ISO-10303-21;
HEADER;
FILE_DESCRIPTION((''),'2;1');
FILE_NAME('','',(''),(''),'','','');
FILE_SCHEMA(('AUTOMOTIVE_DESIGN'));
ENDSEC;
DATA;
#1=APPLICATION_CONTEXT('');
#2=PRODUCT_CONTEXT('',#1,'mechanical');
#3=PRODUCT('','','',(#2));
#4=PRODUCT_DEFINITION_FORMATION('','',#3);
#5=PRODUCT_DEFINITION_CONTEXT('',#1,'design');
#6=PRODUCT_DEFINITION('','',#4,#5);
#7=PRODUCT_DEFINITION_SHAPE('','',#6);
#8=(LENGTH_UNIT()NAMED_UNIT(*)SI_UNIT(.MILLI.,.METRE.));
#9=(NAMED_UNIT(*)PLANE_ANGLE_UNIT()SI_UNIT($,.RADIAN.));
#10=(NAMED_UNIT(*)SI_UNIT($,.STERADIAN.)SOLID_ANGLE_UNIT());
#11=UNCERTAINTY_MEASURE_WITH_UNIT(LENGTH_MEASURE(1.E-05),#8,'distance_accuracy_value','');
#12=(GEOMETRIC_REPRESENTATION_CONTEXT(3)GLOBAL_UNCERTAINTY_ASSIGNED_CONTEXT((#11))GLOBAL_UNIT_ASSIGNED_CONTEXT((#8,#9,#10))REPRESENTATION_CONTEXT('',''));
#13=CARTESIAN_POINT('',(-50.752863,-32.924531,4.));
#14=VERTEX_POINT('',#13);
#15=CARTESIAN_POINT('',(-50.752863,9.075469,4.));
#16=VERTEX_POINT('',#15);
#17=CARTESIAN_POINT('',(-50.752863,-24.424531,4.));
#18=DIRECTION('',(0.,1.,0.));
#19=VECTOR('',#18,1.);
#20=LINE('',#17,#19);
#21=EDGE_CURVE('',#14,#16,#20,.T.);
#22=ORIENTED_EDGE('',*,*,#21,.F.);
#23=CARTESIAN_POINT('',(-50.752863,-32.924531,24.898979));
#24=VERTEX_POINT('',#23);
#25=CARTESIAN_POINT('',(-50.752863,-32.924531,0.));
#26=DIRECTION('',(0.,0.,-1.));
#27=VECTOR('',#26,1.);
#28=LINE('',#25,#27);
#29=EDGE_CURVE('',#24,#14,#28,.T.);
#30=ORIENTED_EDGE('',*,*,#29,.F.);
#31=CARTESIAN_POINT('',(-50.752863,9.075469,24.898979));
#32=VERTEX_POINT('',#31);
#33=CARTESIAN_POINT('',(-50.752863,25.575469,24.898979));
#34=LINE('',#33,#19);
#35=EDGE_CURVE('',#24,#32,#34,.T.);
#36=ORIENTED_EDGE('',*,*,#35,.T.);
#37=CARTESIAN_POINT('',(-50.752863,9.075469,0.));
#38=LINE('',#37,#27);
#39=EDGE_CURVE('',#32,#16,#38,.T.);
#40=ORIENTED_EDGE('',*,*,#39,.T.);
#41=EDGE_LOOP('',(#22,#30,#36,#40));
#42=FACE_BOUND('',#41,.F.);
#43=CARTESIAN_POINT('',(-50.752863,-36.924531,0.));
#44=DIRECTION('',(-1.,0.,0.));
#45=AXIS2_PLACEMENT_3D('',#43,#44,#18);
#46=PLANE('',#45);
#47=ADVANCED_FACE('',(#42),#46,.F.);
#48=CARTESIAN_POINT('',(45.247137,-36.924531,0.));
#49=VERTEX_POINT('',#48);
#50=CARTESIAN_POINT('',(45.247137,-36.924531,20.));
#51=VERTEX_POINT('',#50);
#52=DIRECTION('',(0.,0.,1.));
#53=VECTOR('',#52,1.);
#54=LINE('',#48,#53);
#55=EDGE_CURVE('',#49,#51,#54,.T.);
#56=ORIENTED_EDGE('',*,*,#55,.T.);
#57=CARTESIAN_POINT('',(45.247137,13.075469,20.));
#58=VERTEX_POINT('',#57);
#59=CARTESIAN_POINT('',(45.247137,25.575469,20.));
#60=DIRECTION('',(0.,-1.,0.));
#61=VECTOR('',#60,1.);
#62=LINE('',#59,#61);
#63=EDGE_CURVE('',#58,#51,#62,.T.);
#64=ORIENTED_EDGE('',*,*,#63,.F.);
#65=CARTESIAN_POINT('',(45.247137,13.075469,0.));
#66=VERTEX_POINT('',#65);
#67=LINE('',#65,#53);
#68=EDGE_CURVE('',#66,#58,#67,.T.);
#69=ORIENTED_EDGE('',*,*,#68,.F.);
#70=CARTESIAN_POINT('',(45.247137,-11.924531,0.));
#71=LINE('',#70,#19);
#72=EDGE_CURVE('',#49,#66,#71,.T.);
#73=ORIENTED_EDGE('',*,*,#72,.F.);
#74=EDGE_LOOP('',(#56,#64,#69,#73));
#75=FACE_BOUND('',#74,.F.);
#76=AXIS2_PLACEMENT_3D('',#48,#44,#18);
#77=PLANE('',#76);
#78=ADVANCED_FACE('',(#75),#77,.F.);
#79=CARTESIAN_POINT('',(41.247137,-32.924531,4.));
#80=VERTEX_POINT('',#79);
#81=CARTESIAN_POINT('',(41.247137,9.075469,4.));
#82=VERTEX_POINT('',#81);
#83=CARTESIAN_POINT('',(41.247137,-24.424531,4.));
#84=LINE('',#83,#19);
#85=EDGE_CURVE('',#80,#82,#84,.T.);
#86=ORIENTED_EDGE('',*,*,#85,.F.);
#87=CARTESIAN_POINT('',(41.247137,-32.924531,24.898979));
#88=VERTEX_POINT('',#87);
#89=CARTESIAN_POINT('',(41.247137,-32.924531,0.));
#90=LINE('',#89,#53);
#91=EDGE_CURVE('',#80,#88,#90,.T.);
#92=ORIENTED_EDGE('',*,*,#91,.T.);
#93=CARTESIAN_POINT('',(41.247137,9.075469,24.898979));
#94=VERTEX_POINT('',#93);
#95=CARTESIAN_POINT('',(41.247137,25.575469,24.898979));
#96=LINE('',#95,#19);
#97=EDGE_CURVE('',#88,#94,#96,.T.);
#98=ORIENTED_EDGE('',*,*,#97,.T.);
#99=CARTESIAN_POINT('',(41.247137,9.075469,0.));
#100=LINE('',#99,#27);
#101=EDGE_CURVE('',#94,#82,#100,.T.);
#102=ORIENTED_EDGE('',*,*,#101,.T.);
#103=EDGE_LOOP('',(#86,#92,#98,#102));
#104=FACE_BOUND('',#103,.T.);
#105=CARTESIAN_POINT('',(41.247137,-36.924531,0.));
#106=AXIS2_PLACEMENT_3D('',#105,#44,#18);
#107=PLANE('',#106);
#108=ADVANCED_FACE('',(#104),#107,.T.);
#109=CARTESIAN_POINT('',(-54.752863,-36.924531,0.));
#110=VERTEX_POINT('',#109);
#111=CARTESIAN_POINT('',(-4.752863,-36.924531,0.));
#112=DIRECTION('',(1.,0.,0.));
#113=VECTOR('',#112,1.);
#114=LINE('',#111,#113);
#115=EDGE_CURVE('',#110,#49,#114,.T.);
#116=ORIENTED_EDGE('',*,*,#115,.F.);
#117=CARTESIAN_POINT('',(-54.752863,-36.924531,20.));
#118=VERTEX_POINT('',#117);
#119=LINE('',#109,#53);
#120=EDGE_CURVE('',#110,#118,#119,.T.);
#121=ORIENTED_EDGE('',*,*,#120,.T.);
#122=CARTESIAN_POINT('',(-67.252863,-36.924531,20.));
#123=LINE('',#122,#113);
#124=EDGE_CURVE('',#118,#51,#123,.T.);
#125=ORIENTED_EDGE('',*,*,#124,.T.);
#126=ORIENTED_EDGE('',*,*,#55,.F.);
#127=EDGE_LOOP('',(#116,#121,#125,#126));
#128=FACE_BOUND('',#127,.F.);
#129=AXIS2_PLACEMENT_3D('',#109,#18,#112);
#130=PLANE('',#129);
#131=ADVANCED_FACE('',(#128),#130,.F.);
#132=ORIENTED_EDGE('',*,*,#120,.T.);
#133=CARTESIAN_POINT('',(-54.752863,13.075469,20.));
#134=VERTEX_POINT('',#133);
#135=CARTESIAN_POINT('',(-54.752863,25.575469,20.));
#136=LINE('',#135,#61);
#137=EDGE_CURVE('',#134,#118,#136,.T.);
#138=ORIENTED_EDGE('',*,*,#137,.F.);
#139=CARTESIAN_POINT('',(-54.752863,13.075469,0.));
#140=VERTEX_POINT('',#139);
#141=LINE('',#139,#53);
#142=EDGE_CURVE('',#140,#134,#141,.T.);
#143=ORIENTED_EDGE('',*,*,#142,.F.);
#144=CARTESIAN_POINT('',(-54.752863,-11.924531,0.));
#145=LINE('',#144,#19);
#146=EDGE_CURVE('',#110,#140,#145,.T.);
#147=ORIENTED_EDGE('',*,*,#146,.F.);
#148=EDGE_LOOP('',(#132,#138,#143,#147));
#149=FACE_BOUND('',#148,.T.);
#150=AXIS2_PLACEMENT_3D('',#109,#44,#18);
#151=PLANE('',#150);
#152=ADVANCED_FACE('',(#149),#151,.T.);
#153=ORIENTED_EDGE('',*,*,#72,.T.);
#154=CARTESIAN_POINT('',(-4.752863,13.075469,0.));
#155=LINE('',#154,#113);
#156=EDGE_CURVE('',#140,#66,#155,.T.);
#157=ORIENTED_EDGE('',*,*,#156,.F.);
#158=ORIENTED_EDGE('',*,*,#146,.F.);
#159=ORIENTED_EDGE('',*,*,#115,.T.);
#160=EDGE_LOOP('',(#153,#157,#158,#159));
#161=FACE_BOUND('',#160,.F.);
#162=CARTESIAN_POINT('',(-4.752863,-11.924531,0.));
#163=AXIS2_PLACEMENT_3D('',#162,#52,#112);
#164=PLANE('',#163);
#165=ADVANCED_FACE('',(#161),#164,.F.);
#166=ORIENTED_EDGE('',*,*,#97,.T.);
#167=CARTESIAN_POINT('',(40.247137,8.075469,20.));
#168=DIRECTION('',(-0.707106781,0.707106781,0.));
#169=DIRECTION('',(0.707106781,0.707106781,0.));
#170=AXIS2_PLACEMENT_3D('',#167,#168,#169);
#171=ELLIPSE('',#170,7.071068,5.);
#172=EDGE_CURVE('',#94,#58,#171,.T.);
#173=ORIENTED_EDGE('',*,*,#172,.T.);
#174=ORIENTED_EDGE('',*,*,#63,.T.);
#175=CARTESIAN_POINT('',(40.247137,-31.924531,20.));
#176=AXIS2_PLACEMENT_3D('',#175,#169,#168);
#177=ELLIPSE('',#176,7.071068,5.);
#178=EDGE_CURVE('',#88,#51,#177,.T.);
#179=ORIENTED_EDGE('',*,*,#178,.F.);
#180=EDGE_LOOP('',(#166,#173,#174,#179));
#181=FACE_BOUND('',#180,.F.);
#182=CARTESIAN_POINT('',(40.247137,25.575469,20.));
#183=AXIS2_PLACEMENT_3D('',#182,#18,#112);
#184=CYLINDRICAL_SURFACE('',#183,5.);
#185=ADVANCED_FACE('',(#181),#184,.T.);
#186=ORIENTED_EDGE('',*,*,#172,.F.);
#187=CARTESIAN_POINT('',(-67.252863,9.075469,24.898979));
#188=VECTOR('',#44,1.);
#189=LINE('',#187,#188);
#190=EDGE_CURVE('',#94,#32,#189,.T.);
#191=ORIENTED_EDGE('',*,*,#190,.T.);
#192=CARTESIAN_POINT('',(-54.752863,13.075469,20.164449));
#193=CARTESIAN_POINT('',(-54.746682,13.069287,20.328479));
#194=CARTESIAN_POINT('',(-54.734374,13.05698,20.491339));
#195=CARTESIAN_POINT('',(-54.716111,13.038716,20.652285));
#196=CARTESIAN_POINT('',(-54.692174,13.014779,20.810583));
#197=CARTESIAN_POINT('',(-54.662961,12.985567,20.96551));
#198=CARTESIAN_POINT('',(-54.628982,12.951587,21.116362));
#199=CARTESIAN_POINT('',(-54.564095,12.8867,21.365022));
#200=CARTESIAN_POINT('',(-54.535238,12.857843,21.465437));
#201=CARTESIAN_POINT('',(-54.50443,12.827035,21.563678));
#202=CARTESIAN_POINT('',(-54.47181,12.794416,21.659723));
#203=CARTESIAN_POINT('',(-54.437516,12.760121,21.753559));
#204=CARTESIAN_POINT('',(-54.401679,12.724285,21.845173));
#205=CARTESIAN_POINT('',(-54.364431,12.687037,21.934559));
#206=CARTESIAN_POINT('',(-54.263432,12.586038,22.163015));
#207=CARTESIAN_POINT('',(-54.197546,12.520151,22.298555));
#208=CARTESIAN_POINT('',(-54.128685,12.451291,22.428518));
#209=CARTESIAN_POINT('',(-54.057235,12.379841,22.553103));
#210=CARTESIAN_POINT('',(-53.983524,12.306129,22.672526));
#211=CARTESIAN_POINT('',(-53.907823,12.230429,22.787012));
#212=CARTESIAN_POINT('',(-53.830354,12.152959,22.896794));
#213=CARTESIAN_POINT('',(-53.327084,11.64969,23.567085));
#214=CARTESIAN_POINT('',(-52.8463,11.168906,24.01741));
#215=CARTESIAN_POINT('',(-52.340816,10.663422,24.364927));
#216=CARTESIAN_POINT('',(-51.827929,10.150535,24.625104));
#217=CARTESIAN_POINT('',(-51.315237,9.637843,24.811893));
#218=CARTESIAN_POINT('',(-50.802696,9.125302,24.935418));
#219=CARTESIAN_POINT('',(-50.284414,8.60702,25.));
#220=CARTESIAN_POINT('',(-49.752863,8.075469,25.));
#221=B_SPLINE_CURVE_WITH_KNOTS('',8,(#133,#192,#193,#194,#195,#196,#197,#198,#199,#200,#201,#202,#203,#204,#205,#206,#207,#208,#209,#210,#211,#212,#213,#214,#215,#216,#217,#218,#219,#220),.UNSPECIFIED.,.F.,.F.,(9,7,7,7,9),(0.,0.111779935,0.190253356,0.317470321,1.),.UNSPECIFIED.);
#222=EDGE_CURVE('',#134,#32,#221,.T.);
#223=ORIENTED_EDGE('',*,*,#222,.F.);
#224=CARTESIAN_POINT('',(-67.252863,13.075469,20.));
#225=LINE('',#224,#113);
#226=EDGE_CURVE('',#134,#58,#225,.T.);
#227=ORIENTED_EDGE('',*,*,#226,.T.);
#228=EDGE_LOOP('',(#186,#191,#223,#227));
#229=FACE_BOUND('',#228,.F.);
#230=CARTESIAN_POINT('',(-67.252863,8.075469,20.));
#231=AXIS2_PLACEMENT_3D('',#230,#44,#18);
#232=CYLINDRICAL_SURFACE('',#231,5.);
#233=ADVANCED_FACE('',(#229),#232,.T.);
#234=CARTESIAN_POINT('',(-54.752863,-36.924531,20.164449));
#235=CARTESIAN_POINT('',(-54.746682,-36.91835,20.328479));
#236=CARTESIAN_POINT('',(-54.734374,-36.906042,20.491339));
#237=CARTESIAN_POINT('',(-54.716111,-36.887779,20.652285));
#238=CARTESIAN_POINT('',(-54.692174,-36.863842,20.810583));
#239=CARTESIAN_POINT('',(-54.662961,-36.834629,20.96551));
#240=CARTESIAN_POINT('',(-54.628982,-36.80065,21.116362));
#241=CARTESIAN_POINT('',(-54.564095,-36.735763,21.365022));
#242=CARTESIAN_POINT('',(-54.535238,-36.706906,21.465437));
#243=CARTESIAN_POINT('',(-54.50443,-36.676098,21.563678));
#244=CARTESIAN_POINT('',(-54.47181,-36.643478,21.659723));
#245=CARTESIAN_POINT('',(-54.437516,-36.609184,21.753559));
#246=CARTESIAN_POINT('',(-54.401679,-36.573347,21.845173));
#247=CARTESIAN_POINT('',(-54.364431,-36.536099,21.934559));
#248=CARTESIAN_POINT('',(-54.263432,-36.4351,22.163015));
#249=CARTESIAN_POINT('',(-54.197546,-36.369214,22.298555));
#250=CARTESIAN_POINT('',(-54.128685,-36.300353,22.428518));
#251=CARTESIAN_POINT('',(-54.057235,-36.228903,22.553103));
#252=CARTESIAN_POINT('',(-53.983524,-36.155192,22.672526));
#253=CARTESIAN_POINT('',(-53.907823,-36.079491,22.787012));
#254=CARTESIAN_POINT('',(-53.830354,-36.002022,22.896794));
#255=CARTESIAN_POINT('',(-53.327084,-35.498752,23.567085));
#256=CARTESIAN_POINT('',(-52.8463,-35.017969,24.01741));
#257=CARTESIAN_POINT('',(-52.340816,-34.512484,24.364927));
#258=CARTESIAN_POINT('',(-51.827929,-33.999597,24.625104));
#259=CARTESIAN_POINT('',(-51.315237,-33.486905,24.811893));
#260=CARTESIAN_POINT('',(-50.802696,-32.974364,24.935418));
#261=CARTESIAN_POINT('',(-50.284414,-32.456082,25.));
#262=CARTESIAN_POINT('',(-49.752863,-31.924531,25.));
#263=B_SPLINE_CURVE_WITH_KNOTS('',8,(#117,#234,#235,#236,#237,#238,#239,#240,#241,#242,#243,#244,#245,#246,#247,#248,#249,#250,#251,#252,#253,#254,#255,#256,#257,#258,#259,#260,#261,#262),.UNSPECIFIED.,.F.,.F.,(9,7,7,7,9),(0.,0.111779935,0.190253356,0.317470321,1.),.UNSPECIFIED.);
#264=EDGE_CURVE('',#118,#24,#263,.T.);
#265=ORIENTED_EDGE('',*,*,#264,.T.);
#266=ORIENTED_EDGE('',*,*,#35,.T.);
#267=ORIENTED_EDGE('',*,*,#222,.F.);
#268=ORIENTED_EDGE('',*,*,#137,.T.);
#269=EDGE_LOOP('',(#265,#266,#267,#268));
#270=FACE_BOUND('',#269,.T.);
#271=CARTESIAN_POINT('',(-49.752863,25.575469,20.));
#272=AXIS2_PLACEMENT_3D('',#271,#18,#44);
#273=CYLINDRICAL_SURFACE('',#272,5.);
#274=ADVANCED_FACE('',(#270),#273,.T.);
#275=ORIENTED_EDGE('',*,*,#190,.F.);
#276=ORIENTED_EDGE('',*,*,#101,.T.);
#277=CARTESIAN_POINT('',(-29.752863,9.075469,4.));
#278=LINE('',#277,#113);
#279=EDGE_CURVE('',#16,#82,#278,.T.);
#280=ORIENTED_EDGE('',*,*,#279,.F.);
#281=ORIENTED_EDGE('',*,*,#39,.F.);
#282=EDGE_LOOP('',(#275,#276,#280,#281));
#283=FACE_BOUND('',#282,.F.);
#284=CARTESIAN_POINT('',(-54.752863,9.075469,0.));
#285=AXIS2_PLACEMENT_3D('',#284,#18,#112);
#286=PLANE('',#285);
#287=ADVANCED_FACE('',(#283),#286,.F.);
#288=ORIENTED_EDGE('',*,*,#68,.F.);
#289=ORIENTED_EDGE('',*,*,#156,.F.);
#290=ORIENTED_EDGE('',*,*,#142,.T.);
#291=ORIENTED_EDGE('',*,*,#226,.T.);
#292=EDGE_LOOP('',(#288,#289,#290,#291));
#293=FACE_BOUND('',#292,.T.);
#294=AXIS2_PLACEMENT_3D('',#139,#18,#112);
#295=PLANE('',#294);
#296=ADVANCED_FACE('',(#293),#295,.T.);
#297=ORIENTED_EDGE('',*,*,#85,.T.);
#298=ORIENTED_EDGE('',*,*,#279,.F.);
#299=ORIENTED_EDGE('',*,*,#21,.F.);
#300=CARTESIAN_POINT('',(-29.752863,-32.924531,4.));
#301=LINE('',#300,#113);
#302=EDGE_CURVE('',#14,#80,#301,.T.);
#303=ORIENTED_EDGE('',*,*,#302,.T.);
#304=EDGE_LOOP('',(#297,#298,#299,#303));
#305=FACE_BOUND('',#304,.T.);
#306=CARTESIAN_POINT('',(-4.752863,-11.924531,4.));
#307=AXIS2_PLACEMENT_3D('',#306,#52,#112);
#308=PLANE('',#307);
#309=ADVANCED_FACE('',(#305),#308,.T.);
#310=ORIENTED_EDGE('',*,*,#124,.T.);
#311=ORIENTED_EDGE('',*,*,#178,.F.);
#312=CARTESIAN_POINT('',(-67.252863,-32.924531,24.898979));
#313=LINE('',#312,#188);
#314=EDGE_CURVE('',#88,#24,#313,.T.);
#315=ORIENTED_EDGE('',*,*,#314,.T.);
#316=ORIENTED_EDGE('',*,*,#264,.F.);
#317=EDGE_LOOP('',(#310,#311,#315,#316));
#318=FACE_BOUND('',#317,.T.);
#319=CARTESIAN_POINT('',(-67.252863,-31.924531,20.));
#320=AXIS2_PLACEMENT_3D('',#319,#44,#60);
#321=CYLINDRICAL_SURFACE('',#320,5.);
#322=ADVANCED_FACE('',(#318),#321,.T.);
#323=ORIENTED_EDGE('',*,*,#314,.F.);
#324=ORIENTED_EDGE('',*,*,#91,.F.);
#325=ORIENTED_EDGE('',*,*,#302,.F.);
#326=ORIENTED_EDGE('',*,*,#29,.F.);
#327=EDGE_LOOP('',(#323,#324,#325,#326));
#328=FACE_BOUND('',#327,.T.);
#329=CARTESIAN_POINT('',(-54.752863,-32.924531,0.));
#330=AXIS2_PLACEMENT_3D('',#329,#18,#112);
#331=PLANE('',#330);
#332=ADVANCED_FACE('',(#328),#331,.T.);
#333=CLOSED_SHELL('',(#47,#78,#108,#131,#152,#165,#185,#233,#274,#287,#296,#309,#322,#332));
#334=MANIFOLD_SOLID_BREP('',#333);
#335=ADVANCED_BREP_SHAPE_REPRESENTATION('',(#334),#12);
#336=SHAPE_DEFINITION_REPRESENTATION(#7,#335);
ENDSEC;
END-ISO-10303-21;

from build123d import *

# Parameters (mm, degrees)
F0_W        = 100
F0_H        = 50
F1_DEPTH    = 25
F2_T        = -4
F3_T1_DEPTH = 75
F3_T3_DEPTH = 125


# Not quite as in the source:
# - a fillet or chamfer that OpenCascade refuses, or shapes differently, is made with other operations: its cross-section is extruded or revolved along the edge and cut away or added


with BuildPart() as f1:
    # F0 (on Top) → F1 (new body)
    with BuildSketch(Plane.XY):
        with Locations((-4.7528631985, -11.9245312498)):
            Rectangle(F0_W, F0_H)
    extrude(amount=F1_DEPTH)

    # F2
    f2_openings = [f1.faces().sort_by_distance(p)[0] for p in [
        (-4.752863, -11.924531, 25),
    ]]
    offset(amount=F2_T, openings=f2_openings)

    # F3: fillet of radius 5 on 4 edges, made by hand

    # F3_s2 → F3_t1 (cut)
    with BuildSketch(Plane.XZ.offset(-25.5754687502)):
        with BuildLine():
            ThreePointArc((-54.7528631985, 20), (-53.2883971045, 23.5355339059), (-49.7528631985, 25))
            Line((-49.7528631985, 25), (-54.7528631985, 25))
            Line((-54.7528631985, 25), (-54.7528631985, 20))
        make_face()
        with BuildLine():
            ThreePointArc((45.2471368015, 20), (43.7826707074, 23.5355339059), (40.2471368015, 25))
            Line((40.2471368015, 25), (45.2471368015, 25))
            Line((45.2471368015, 25), (45.2471368015, 20))
        make_face()
    extrude(amount=F3_T1_DEPTH, mode=Mode.SUBTRACT)

    # F3_s4 → F3_t3 (cut)
    with BuildSketch(Plane.YZ.offset(-67.2528631985)):
        with BuildLine():
            ThreePointArc((13.0754687502, 20), (11.6110026561, 23.5355339059), (8.0754687502, 25))
            Line((8.0754687502, 25), (13.0754687502, 25))
            Line((13.0754687502, 25), (13.0754687502, 20))
        make_face()
        with BuildLine():
            ThreePointArc((-36.9245312498, 20), (-35.4600651557, 23.5355339059), (-31.9245312498, 25))
            Line((-31.9245312498, 25), (-36.9245312498, 25))
            Line((-36.9245312498, 25), (-36.9245312498, 20))
        make_face()
    extrude(amount=F3_T3_DEPTH, mode=Mode.SUBTRACT)


solid = f1.part
